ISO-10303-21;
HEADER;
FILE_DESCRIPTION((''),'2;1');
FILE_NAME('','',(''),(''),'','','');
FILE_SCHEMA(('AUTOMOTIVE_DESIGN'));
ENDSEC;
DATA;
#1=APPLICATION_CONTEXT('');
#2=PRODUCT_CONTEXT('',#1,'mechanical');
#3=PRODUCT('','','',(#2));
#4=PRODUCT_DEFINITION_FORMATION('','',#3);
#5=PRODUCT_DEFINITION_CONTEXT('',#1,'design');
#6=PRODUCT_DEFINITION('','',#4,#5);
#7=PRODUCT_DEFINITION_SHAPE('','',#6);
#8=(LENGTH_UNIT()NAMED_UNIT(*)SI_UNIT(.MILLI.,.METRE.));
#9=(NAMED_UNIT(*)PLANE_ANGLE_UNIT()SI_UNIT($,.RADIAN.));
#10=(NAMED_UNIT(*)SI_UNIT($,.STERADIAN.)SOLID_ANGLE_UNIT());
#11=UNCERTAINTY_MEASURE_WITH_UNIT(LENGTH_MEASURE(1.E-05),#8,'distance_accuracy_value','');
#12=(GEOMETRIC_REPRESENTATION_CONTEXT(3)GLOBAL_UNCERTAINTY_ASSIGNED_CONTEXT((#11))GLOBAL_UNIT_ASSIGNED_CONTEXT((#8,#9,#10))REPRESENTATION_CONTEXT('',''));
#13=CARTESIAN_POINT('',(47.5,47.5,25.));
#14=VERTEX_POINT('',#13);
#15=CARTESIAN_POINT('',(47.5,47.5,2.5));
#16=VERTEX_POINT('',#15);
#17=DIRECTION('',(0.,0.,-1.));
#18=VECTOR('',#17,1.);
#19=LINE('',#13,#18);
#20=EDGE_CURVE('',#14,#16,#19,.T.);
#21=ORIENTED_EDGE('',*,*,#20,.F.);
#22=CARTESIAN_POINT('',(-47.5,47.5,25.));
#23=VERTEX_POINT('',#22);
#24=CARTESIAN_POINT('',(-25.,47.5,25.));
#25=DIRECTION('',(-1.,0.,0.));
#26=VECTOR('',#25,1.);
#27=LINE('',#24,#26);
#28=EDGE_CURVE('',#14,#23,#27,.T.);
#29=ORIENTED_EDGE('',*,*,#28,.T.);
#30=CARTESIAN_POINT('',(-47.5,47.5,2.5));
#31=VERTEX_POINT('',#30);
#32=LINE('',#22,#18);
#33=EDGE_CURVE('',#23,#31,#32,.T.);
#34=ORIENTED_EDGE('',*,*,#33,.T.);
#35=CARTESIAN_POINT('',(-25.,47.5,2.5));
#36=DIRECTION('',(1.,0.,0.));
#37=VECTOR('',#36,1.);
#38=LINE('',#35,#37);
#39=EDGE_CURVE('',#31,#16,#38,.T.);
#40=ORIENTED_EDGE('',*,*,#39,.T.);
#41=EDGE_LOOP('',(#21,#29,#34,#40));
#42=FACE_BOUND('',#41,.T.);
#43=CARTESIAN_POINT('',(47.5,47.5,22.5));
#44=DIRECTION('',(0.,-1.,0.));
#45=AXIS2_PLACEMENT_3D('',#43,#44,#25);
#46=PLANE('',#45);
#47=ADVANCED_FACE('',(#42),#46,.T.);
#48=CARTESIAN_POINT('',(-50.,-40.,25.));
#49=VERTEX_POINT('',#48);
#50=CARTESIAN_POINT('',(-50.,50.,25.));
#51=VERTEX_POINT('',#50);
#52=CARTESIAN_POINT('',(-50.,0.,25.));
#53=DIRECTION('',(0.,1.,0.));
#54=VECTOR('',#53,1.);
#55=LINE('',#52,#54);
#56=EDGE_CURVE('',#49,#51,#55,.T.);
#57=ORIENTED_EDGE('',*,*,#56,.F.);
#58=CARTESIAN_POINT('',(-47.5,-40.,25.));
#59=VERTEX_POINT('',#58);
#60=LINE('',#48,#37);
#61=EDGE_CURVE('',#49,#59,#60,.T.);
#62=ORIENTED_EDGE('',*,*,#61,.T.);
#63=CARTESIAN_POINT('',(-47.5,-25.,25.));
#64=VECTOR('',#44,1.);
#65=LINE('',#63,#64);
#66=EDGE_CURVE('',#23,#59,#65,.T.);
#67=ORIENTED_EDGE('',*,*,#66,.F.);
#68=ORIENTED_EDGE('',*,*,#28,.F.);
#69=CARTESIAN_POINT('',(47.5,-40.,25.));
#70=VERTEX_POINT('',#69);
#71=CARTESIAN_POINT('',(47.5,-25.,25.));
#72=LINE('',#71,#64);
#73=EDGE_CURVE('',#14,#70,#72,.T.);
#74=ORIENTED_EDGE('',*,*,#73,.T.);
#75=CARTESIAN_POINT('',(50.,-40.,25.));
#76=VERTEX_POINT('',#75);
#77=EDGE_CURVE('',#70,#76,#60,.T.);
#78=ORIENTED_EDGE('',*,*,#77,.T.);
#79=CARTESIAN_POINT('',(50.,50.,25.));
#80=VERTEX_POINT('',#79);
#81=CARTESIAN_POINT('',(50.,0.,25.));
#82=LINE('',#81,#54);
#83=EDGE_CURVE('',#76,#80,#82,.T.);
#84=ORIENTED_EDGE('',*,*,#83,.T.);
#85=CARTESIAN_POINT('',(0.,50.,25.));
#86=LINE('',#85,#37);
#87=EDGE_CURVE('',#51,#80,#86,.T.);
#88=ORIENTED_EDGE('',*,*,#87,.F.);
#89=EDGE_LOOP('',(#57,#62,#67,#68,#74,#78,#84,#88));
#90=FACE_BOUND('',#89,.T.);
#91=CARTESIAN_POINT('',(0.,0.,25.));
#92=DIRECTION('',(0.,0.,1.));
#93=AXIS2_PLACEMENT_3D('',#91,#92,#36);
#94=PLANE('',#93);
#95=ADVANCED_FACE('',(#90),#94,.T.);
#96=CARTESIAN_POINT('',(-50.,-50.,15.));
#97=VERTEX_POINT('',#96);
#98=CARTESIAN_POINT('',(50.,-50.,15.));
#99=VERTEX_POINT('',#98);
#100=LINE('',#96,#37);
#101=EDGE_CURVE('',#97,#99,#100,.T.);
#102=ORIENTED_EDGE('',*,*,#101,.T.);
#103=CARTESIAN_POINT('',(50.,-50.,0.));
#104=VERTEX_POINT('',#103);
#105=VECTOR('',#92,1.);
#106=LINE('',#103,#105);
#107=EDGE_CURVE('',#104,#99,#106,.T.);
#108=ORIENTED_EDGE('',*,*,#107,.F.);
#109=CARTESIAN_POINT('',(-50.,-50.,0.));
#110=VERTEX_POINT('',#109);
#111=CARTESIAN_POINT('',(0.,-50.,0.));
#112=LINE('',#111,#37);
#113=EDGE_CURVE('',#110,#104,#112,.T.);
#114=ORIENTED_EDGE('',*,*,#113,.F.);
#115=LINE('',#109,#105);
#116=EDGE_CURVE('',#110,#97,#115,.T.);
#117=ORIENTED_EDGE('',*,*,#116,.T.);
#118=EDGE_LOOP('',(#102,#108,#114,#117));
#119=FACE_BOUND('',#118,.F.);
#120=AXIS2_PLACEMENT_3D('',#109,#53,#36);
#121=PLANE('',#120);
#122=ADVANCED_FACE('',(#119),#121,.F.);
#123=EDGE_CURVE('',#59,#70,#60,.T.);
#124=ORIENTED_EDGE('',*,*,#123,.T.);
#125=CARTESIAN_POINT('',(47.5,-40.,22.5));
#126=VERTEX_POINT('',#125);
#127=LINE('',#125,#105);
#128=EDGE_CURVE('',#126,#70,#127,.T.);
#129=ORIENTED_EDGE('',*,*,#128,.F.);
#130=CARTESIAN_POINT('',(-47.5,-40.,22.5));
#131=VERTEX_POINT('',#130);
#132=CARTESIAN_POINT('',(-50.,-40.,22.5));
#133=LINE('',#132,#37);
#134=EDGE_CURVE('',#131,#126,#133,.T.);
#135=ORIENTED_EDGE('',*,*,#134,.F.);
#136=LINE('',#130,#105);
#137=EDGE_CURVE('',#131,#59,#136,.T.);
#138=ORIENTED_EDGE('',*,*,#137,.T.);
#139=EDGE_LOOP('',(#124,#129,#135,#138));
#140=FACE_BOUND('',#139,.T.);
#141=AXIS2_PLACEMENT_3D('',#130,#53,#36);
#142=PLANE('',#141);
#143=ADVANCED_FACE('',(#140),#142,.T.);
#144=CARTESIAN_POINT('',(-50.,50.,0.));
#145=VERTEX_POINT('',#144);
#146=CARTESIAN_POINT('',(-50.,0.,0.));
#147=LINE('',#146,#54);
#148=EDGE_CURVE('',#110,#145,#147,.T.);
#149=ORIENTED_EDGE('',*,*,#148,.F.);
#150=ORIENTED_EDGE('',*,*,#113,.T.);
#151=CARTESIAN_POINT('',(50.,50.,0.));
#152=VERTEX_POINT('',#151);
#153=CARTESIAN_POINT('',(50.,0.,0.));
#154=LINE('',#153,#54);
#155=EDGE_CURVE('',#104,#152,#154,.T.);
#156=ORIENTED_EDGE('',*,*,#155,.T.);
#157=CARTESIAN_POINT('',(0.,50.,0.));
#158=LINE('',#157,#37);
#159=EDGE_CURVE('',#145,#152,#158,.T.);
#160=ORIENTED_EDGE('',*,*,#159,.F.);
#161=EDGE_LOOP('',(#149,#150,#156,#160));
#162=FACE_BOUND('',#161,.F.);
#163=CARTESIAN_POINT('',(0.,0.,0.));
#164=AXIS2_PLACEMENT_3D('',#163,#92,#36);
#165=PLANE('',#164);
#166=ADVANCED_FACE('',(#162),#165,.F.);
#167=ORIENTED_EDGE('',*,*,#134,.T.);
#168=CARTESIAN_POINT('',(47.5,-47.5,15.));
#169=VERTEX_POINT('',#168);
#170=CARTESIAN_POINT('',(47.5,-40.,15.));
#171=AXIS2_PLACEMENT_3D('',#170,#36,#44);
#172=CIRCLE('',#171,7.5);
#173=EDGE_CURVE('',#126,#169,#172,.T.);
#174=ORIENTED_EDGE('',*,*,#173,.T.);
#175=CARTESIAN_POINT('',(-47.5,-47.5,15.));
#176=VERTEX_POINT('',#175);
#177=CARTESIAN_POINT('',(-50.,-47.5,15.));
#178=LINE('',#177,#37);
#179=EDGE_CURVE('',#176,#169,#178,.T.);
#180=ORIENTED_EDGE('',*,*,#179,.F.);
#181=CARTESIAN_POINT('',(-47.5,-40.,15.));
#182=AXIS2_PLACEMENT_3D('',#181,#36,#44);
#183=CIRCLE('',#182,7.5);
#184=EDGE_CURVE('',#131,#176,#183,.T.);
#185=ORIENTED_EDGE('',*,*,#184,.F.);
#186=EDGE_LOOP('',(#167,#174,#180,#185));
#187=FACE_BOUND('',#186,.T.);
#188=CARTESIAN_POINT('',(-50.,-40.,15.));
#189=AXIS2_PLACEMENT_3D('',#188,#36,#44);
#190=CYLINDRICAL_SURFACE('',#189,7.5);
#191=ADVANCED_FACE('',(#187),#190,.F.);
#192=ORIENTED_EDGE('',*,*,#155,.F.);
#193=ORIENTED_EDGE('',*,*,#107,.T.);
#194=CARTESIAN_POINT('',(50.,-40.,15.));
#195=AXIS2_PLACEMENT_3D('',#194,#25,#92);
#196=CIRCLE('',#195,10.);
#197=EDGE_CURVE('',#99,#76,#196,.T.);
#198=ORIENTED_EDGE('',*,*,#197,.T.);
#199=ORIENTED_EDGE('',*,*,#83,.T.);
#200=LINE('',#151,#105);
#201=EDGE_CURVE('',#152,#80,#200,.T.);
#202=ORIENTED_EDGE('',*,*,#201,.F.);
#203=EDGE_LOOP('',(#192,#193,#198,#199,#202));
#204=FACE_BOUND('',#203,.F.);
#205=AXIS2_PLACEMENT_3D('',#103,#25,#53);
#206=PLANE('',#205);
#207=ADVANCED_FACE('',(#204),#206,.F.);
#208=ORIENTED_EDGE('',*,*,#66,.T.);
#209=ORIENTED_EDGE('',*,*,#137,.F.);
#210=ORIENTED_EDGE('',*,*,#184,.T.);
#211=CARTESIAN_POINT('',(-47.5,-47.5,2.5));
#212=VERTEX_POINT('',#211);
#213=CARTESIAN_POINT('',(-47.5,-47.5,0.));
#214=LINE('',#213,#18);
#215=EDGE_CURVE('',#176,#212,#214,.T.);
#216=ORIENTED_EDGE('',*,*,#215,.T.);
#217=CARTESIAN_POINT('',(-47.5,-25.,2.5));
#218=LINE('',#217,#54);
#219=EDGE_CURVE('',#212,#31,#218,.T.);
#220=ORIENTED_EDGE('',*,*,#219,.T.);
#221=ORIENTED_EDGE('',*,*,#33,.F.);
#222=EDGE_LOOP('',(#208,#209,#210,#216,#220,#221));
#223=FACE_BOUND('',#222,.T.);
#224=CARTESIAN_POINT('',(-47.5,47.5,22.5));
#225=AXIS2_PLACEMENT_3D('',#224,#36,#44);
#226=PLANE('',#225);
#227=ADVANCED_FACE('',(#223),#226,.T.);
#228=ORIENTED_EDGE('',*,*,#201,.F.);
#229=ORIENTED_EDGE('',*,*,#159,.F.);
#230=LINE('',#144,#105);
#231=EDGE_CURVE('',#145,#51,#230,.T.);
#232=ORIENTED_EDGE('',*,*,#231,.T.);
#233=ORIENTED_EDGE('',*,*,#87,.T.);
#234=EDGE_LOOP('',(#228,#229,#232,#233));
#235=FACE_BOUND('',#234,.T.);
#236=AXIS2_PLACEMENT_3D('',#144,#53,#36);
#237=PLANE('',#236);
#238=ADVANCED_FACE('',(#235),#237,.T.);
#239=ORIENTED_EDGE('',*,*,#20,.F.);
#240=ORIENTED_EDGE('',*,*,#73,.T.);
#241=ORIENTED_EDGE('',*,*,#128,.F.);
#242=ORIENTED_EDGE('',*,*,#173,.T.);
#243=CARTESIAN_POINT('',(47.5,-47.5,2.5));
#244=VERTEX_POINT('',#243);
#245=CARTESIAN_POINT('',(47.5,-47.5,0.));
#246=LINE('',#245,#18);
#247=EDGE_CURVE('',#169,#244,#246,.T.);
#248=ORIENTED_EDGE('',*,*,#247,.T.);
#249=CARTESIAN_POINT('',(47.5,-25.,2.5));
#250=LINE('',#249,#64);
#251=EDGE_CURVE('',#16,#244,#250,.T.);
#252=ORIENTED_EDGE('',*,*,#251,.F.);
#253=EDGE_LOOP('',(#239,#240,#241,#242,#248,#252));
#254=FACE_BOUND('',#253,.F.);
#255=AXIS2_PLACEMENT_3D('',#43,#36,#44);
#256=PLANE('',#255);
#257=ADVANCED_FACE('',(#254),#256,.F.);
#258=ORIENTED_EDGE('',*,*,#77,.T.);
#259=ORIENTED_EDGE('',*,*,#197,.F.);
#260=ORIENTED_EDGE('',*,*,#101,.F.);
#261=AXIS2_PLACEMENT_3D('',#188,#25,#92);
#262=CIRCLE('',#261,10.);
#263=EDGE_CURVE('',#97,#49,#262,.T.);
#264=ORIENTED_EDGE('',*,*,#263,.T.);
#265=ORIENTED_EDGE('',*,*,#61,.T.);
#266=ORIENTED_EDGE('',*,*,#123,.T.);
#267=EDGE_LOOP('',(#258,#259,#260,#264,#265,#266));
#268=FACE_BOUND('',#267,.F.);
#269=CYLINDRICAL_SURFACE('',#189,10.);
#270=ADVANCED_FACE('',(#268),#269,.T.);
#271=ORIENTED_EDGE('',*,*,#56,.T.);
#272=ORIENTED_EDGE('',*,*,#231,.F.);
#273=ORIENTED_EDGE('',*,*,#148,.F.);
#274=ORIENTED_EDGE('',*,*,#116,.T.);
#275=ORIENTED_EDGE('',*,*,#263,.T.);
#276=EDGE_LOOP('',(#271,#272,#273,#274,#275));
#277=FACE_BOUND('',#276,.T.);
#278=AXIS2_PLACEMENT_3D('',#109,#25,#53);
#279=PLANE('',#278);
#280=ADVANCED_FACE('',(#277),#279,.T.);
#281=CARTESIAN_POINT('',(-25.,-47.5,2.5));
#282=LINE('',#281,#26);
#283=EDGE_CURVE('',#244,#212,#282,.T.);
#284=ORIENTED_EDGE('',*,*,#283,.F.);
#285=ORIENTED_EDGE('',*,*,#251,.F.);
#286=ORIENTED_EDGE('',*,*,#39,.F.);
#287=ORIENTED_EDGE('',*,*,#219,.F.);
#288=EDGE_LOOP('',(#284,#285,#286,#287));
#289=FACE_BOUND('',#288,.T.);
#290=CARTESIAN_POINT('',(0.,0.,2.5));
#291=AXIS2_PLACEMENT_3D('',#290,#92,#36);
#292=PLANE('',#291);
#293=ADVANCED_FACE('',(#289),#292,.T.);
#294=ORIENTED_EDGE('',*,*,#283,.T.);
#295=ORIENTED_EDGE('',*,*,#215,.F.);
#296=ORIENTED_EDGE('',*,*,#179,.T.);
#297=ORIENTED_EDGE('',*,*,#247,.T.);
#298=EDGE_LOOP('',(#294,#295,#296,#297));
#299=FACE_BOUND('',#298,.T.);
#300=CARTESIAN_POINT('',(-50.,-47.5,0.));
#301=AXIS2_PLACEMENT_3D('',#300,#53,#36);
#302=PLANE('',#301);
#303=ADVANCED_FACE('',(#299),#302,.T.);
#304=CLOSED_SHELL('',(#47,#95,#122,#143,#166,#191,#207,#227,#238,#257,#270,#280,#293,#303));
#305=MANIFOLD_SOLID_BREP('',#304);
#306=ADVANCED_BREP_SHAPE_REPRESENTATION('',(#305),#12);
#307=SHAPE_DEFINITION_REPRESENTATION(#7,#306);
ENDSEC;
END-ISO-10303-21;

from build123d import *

# Parameters (mm, degrees)
F0_W     = 100
F0_H     = 100
F1_DEPTH = 25
F2_R     = 10
F3_T     = -2.5


# Not quite as in the source:
# - a shell that OpenCascade refuses in one call is made with other operations: the cavity is built on its own and cut out


with BuildPart() as f1:
    # F0 (on Top) → F1 (new body)
    with BuildSketch(Plane.XY):
        Rectangle(F0_W, F0_H)
    extrude(amount=F1_DEPTH)

    # F2
    f2_edges = [f1.edges().sort_by_distance(p)[0] for p in [
        (0, -50, 25),
    ]]
    fillet(f2_edges, radius=F2_R)

    # F3: a shell. OpenCascade refuses it in one call, so the cavity is built on its own and cut out:
    # the body offset inwards by the wall thickness, plus a prism from it out through each open face.
    f3_core = offset(f1.part, amount=F3_T, mode=Mode.PRIVATE)
    f3_exits = [f3_core.faces().sort_by_distance(p)[0] for p in [
        (0, 3.75, 22.5),
    ]]
    add(f3_core, mode=Mode.SUBTRACT)
    extrude(f3_exits, amount=-F3_T, mode=Mode.SUBTRACT)


solid = f1.part
